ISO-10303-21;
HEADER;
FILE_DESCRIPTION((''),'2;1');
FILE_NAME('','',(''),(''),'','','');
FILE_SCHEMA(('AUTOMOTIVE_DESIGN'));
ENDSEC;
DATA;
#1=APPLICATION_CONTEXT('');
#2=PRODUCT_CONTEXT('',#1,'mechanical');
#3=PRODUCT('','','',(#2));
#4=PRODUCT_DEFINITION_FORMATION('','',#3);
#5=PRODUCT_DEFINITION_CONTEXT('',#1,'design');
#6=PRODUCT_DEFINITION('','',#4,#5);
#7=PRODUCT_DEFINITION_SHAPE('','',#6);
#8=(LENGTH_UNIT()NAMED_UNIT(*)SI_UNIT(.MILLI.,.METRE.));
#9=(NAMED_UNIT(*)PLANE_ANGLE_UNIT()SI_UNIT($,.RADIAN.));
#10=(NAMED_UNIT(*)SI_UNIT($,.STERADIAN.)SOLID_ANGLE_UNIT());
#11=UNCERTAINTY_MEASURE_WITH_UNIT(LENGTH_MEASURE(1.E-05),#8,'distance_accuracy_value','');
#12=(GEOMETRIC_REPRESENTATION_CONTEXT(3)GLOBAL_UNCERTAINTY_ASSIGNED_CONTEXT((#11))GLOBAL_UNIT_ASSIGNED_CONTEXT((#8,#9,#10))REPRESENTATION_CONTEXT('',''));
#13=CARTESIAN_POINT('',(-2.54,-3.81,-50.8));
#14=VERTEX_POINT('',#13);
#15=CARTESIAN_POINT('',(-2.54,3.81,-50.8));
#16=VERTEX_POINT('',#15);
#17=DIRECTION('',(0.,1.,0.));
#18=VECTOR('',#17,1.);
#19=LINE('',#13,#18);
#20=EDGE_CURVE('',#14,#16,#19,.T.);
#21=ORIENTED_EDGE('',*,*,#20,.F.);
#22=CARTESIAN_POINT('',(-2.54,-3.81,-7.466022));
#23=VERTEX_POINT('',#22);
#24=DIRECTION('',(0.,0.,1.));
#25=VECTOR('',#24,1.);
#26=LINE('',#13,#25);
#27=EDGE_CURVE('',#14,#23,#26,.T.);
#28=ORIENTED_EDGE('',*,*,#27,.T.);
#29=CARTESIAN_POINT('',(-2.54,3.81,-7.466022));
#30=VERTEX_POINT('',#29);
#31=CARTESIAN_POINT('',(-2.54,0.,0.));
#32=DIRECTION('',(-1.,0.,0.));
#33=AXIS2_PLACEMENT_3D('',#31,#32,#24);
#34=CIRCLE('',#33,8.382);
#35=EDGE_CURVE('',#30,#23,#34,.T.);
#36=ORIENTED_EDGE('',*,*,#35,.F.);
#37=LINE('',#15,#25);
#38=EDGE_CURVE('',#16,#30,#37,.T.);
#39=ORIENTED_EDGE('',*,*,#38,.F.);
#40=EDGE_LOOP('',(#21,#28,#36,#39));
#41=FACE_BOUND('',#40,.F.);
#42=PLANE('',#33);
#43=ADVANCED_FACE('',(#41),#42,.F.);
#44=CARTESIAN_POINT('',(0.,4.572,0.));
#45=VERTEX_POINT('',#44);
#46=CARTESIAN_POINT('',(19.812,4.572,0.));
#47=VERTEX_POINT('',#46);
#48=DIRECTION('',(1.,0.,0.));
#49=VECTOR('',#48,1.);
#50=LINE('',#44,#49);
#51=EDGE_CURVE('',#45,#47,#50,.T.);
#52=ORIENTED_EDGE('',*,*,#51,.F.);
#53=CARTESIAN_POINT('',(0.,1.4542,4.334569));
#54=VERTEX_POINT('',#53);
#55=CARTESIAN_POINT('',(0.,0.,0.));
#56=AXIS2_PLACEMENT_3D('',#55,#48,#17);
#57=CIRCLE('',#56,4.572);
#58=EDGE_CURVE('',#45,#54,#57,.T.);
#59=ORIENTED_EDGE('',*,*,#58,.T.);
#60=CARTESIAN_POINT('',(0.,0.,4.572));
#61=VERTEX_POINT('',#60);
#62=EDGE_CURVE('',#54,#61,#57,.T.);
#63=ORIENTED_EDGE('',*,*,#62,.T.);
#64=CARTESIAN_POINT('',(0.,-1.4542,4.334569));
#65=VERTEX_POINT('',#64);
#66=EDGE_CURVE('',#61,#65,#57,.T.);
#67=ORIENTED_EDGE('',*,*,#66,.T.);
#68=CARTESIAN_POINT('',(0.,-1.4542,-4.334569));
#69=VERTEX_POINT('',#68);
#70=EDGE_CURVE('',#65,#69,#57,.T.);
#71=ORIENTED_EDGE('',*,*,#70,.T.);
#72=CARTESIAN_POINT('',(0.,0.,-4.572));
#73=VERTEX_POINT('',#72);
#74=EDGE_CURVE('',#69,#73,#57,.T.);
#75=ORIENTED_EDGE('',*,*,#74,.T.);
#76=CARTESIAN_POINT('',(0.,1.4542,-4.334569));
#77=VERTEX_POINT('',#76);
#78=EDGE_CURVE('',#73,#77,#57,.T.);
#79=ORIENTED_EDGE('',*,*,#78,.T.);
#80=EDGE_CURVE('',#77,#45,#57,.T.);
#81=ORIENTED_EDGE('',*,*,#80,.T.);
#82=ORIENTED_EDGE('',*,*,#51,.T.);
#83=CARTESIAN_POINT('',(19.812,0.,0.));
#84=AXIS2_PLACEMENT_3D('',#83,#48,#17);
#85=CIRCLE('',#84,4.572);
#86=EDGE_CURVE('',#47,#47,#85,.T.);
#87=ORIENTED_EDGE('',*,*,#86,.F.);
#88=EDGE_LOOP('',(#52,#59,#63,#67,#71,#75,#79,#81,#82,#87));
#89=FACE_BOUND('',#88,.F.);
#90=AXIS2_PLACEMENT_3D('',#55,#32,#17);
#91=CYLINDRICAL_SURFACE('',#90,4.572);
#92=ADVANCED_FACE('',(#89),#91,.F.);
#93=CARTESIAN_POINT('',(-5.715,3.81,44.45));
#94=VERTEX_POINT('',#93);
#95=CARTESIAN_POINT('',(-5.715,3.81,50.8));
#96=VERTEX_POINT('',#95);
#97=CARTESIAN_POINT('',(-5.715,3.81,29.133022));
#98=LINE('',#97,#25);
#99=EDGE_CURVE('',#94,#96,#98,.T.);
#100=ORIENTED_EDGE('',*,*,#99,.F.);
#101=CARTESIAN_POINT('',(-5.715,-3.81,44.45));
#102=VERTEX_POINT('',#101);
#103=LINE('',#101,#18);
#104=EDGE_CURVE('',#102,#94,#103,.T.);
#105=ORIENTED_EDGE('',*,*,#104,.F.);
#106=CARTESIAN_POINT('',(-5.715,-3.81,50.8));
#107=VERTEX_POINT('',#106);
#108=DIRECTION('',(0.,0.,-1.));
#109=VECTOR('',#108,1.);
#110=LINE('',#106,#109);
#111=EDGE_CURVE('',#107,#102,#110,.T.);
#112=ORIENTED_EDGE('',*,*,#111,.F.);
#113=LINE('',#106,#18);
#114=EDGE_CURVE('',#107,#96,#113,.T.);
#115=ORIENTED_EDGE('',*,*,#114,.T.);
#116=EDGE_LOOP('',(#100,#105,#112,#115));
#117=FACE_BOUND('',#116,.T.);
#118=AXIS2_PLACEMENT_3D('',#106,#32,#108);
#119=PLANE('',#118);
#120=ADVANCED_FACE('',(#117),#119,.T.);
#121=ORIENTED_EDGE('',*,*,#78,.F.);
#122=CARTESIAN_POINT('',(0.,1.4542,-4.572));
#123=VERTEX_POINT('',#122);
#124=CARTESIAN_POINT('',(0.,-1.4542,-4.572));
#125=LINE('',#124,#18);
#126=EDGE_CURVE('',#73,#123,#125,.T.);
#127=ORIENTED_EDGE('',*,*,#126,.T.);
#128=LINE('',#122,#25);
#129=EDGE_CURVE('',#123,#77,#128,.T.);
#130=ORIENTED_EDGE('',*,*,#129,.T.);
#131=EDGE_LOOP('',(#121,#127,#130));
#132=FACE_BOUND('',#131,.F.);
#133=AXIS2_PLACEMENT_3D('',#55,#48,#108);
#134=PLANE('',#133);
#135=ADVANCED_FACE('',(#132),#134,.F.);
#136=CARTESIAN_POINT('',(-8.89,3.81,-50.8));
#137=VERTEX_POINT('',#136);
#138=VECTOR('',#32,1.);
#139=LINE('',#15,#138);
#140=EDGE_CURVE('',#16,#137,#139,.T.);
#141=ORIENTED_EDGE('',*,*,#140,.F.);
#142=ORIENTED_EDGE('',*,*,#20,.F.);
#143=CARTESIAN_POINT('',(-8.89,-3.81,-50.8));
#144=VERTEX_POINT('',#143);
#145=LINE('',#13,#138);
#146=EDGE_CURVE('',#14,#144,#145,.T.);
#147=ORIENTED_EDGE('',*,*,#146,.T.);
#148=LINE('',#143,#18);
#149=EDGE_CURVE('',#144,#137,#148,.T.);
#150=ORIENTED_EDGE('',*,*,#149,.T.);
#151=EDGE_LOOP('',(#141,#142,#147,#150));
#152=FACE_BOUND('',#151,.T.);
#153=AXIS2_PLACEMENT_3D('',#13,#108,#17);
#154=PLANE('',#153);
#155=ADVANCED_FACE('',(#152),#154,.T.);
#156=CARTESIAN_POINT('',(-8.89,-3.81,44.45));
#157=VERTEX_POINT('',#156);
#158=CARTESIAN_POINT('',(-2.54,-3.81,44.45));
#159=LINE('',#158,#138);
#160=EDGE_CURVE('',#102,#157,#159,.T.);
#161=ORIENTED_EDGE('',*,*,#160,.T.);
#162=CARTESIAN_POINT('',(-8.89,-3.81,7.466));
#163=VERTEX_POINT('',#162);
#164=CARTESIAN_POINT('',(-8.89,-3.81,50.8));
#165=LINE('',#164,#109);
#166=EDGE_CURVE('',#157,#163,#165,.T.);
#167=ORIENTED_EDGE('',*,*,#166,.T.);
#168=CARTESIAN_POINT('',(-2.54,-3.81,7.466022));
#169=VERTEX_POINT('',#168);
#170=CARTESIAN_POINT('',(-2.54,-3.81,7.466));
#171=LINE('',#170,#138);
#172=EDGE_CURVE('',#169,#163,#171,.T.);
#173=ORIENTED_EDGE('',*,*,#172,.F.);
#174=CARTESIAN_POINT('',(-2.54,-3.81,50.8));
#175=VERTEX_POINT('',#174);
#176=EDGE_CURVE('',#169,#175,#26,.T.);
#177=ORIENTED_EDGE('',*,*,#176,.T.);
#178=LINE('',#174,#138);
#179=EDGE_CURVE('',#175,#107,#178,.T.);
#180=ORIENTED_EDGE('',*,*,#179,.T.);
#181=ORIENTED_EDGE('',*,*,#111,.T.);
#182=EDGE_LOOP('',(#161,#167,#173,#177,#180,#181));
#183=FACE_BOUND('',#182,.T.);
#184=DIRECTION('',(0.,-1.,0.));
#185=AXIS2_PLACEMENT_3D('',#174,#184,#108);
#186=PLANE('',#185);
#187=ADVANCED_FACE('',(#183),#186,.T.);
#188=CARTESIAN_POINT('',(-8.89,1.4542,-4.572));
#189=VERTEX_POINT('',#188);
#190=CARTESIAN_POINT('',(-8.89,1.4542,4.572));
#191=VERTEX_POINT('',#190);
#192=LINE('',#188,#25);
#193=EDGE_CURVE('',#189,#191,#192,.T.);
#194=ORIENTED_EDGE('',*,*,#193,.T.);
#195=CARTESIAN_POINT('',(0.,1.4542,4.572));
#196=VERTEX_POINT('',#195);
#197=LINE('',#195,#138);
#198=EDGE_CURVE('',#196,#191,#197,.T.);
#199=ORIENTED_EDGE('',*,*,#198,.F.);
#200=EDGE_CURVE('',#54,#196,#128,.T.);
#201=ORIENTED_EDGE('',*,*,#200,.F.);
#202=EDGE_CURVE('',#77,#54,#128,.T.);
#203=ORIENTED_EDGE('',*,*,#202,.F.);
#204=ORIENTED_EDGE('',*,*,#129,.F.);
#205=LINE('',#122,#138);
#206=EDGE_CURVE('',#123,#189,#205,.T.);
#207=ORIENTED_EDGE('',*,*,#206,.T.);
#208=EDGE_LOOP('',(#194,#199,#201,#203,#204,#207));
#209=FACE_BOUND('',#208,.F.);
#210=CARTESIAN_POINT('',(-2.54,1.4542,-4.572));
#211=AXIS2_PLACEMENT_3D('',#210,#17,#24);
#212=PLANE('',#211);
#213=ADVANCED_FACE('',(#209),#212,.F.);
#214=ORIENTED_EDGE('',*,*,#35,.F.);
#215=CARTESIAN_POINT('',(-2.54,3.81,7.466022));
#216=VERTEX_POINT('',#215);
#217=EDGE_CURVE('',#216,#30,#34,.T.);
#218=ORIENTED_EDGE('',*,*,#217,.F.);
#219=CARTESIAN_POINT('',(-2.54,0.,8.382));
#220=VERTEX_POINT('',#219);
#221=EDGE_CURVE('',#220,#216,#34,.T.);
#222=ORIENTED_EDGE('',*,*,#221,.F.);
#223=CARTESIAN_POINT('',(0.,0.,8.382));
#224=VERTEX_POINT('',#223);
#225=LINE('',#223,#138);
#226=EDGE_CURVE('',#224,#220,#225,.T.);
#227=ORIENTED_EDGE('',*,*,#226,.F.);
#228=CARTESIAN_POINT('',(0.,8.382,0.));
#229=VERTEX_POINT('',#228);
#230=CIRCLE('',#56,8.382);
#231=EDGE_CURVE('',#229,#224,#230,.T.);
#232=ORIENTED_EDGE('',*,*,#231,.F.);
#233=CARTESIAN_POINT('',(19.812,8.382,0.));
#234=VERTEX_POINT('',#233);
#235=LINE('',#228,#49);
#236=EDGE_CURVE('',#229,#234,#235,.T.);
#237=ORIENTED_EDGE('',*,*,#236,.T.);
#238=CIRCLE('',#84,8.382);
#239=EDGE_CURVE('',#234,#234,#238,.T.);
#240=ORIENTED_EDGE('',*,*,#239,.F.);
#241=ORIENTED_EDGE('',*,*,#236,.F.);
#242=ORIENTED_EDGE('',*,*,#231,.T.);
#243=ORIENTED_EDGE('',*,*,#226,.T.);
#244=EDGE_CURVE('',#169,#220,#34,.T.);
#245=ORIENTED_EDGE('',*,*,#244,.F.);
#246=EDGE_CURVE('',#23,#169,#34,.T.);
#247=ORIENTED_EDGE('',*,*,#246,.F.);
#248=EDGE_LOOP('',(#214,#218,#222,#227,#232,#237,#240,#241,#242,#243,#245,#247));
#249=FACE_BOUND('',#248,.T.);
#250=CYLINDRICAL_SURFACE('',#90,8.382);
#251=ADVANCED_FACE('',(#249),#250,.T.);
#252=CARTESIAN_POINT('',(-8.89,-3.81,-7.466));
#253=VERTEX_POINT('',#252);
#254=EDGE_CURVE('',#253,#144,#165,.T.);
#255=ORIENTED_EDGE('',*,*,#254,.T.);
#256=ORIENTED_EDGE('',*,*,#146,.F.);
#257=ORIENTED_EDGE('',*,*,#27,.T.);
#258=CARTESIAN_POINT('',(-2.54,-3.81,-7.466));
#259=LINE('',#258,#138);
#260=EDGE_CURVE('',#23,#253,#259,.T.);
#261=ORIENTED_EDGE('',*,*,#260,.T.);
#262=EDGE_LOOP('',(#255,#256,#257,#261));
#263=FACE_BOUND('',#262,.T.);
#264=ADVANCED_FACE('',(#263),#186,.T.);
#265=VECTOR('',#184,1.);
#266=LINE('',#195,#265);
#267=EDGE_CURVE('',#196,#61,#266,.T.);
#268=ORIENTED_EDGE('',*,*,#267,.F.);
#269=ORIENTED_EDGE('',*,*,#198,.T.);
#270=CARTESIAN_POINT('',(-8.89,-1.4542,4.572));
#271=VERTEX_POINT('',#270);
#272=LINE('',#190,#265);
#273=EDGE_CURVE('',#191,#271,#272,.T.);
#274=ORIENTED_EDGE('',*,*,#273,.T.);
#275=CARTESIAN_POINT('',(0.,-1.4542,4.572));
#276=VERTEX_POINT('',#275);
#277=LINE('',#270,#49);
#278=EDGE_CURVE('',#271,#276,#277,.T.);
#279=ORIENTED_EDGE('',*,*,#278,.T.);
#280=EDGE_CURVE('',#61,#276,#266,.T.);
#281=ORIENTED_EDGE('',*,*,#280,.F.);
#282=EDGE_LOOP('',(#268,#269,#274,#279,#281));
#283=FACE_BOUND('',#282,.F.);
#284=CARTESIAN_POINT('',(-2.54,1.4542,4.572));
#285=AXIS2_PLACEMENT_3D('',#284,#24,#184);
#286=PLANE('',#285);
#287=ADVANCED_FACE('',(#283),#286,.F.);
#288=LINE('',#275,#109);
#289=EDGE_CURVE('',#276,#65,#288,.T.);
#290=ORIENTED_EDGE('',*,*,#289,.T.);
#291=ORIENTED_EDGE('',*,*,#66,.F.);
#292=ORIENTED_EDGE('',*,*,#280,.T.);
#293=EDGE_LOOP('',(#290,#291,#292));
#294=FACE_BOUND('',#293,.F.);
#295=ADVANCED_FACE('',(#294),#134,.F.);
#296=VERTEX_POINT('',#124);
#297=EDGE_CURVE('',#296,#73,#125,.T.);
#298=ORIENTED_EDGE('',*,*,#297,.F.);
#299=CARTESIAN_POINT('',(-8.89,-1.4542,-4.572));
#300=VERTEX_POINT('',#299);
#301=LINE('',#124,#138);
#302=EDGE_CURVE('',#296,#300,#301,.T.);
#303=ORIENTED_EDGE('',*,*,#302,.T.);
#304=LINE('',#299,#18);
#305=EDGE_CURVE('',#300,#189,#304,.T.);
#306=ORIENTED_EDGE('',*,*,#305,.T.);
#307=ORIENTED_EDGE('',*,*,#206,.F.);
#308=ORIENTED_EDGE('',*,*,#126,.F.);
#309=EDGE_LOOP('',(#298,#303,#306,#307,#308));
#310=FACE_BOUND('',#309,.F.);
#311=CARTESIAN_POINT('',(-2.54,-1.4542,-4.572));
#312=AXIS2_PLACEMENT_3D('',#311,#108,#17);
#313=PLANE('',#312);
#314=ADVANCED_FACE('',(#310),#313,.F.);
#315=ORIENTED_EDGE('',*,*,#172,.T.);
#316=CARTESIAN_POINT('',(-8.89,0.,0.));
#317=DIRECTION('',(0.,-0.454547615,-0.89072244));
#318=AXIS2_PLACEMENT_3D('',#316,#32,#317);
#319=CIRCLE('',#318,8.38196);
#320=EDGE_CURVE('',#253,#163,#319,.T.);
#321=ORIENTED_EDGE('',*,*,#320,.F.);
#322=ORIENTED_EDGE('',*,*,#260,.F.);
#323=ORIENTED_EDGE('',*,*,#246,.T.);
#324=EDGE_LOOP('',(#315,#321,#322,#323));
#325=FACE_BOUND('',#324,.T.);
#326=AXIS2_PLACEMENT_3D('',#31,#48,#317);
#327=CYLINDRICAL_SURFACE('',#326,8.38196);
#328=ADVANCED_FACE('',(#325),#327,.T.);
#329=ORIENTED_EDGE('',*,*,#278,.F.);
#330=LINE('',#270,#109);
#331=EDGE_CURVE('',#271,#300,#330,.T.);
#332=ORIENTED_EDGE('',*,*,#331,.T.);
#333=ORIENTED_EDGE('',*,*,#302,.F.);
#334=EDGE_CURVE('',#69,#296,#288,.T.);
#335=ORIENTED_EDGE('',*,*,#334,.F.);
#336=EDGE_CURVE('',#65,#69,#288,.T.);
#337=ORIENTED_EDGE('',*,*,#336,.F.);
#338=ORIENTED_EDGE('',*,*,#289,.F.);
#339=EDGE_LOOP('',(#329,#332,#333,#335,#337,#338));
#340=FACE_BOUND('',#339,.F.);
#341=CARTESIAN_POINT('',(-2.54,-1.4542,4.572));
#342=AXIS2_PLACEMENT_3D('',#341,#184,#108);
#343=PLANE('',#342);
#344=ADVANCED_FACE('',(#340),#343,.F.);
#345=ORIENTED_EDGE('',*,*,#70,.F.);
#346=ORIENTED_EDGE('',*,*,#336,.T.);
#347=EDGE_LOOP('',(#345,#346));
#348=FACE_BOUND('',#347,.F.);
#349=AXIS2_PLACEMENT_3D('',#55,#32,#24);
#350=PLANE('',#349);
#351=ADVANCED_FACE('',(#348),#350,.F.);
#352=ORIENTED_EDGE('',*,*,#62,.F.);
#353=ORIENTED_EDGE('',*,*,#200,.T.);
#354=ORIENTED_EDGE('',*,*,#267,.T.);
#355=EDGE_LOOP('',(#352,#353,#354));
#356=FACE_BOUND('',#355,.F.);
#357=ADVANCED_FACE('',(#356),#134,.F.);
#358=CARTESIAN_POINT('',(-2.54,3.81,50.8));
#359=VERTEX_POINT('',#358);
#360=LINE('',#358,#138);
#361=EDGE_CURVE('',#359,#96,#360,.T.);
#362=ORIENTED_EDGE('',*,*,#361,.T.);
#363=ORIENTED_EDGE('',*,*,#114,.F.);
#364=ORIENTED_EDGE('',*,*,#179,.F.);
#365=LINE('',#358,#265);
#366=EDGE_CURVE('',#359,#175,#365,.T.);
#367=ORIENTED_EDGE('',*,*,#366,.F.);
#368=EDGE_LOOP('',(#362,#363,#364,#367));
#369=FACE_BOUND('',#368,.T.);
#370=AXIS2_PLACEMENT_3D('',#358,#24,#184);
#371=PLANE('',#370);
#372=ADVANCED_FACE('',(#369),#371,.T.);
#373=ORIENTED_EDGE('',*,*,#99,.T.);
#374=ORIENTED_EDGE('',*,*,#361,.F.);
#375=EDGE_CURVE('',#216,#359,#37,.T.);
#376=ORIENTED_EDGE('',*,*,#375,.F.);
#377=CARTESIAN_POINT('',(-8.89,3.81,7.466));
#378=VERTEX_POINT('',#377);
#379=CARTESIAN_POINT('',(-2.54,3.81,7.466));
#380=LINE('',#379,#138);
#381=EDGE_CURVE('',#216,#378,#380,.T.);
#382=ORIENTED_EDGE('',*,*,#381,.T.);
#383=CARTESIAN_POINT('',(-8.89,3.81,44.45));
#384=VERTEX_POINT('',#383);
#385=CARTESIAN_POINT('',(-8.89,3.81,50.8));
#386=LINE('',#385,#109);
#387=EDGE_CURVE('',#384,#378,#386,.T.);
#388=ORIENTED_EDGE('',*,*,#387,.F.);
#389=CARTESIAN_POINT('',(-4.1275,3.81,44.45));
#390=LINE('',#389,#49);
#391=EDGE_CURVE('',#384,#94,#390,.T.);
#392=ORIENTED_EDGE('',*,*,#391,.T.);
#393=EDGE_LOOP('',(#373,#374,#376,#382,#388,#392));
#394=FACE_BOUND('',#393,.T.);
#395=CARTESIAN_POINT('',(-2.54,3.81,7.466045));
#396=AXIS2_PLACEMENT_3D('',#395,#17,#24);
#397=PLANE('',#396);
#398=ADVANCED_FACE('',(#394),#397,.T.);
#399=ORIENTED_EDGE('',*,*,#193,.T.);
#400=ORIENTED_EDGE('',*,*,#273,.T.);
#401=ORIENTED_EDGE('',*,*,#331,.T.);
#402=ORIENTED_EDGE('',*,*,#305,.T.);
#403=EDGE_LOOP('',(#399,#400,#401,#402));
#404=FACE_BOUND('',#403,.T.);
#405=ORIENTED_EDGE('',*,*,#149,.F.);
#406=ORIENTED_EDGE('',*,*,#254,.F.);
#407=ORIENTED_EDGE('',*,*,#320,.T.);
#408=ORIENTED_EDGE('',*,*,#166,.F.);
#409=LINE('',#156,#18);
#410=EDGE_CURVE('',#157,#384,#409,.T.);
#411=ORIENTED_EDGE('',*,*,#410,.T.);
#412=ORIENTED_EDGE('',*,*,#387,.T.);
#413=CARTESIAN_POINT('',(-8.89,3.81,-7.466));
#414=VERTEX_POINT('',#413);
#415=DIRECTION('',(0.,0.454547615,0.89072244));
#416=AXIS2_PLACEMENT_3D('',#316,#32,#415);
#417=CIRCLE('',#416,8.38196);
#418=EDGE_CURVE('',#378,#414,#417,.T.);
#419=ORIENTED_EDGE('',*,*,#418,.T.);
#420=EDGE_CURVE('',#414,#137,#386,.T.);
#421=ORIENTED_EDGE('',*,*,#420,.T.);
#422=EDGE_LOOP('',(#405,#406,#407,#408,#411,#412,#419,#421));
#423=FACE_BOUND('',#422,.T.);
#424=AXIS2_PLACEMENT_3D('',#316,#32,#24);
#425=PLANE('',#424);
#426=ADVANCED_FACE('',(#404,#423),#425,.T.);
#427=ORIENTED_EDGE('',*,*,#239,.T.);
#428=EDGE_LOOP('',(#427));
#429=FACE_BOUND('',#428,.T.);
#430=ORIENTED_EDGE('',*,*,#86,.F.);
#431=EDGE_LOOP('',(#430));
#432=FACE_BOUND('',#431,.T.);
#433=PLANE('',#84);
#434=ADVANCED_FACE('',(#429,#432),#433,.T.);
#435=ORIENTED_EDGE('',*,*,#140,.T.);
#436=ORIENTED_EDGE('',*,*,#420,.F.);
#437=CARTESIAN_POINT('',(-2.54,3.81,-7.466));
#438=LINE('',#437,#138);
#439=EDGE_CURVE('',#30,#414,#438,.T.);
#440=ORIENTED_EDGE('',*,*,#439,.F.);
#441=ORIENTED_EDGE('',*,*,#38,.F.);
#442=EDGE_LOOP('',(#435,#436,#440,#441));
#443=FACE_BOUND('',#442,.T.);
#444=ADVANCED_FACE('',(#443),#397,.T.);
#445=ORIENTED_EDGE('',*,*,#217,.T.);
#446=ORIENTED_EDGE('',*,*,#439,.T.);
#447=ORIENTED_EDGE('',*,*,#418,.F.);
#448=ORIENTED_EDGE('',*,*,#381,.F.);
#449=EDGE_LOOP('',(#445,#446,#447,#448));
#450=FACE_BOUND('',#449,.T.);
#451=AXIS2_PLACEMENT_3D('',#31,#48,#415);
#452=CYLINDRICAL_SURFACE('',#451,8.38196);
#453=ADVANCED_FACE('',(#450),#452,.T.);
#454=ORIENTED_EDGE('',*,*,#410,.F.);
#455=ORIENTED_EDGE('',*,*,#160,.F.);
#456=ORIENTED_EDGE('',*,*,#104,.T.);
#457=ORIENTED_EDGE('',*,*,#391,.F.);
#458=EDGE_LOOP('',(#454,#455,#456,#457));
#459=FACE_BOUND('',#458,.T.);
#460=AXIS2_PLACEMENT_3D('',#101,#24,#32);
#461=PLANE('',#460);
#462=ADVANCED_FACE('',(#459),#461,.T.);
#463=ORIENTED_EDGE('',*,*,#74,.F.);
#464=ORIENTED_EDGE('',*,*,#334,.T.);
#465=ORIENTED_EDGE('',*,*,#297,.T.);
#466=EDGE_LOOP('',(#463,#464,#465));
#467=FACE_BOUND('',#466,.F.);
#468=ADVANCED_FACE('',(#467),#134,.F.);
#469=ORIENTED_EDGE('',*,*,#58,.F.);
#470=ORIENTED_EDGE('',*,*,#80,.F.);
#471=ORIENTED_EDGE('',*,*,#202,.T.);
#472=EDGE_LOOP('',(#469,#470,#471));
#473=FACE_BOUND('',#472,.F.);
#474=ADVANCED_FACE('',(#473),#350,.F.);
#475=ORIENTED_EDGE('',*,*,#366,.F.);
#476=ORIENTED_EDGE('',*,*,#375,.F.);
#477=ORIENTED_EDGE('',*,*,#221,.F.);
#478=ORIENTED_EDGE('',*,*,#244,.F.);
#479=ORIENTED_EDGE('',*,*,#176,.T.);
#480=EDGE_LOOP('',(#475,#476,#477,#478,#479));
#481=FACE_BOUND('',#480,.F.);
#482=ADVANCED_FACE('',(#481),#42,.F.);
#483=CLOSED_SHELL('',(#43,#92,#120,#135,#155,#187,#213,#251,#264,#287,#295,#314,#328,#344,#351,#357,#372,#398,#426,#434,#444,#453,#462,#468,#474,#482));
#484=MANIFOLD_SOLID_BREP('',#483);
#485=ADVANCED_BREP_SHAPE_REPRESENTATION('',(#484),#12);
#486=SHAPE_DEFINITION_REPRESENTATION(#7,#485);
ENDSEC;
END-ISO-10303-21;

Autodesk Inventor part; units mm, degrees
ref_plane "YZ Plane" through (0, 0, 0) normal (1, 0, 0) x (0, 1, 0)
ref_plane "XZ Plane" through (0, 0, 0) normal (0, 1, 0) x (-1, 0, 0)
ref_plane "XY Plane" through (0, 0, 0) normal (0, 0, 1) x (1, 0, 0)
sketch "Sketch1" plane through (0, 0, 0) normal (1, 0, 0) x (0, 1, 0)
  circle A0 centre (0, 0) radius 4.572
  circle A1 centre (0, 0) radius 8.382
  dimension "d0" = 9.144
  dimension "d1" = 3.81
extrude "Extrusion1" add sketch "Sketch1" along normal blind 19.812
sketch "Sketch2" plane through (0, 0, 0) normal (-1, 0, 0) x (0, 0, 1)
  circle A0 centre (0, 0) radius 8.382
  circle A1 centre (0, 0) radius 7.747
  circle A2 centre (0, 0) radius 8.382 projected
  dimension "d42" = 0
extrude "Extrusion2" add sketch "Sketch2" along normal blind 2.54 contours A0 | A1
sketch "Sketch10" plane through (0, 0, 0) normal (1, 0, 0) x (0, 0, -1)
  circle A0 centre (0, 0) radius 1.4542
  line L0 (-4.572, 1.4542) -> (4.572, 1.4542)
  line L1 (4.572, 1.4542) -> (4.572, -1.4542)
  line L2 (4.572, -1.4542) -> (-4.572, -1.4542)
  line L3 (-4.572, -1.4542) -> (-4.572, 1.4542)
  circle A1 centre (0, 0) radius 4.572 projected
  dimension "d43" = 0
  dimension "d44" = 0
extrude "Extrusion7" cut sketch "Sketch10" against normal blind 22.225 contours A0 | A0 L0 A1 L2 | A0 L2 A1 L0 | A1 L3 L0 | L0 L1 A1 | A1 L1 L2 | L2 L3 A1
sketch "Sketch24" plane through (-2.54, 0, 0) normal (-1, 0, 0) x (0, 0, 1)
  line L0 (50.8, -3.81) -> (-50.8, -3.81)
  line L1 (-50.8, -3.81) -> (-50.8, 3.81)
  line L2 (-50.8, 3.81) -> (50.8, 3.81)
  line L3 (50.8, 3.81) -> (50.8, -3.81)
  line L4 (4.572, 1.4542) -> (4.572, -1.4542) projected
  line L5 (4.572, -1.4542) -> (-4.572, -1.4542) projected
  line L6 (-4.572, -1.4542) -> (-4.572, 1.4542) projected
  line L7 (-4.572, 1.4542) -> (4.572, 1.4542) projected
  circle A0 centre (0, 0) radius 8.382 projected
  dimension "d90" = 101.6
  dimension "d91" = 50.8
  dimension "d92" = 3.81
  dimension "d93" = 3.81
extrude "Extrusion18" add sketch "Sketch24" along normal blind 6.35 contours L0 A0 L2 L3 | L0 A0 L2 | L0 L1 L2 A0
sketch "Sketch25" plane through (-2.54, 0, 0) normal (-1, 0, 0) x (0, 0, 1)
  line L0 (-7.466, 3.81) -> (7.466, 3.81) projected
  arc A0 (7.466, 3.81) -> (-7.466, 3.81) centre (0, 0) ccw projected
  line L1 (7.466, -3.81) -> (-7.466, -3.81) projected
  arc A1 (-7.466, -3.81) -> (7.466, -3.81) centre (0, 0) ccw projected
extrude "Extrusion19" add sketch "Sketch25" along normal blind 6.35
sketch "Sketch26" plane through (-2.54, -3.81, 7.466) normal (0, -1, 0) x (1, 0, 0)
  line L0 (0, 0) -> (0, 43.334) projected
  line L1 (0, 43.334) -> (-3.175, 43.334)
  line L2 (-3.175, 43.334) -> (-3.175, 36.984)
  line L3 (-3.175, 36.984) -> (0, 36.984)
  line L4 (0, 36.984) -> (0, 43.334)
  line L5 (0, 43.334) -> (-6.35, 43.334) projected
  line L6 (0, 36.984) -> (-6.35, 36.984)
  line L7 (-6.35, 36.984) -> (-6.35, 43.334)
  line L8 (-6.35, 43.334) -> (0, 43.334)
  line L9 (0, 43.334) -> (0, 36.984)
  point P0 (2.54, -7.466)
  dimension "d98" = 3.175
  dimension "d99" = 6.35
extrude "Extrusion20" cut sketch "Sketch26" against normal blind 25.4 contours L6 L7 L5 L2
sketch "Sketch27" plane through (-8.89, -3.81, 7.466) normal (0, -1, 0) x (1, 0, 0)
  point P0 (8.89, -7.466)
properties part number "LiftMotorHousingTwo"
